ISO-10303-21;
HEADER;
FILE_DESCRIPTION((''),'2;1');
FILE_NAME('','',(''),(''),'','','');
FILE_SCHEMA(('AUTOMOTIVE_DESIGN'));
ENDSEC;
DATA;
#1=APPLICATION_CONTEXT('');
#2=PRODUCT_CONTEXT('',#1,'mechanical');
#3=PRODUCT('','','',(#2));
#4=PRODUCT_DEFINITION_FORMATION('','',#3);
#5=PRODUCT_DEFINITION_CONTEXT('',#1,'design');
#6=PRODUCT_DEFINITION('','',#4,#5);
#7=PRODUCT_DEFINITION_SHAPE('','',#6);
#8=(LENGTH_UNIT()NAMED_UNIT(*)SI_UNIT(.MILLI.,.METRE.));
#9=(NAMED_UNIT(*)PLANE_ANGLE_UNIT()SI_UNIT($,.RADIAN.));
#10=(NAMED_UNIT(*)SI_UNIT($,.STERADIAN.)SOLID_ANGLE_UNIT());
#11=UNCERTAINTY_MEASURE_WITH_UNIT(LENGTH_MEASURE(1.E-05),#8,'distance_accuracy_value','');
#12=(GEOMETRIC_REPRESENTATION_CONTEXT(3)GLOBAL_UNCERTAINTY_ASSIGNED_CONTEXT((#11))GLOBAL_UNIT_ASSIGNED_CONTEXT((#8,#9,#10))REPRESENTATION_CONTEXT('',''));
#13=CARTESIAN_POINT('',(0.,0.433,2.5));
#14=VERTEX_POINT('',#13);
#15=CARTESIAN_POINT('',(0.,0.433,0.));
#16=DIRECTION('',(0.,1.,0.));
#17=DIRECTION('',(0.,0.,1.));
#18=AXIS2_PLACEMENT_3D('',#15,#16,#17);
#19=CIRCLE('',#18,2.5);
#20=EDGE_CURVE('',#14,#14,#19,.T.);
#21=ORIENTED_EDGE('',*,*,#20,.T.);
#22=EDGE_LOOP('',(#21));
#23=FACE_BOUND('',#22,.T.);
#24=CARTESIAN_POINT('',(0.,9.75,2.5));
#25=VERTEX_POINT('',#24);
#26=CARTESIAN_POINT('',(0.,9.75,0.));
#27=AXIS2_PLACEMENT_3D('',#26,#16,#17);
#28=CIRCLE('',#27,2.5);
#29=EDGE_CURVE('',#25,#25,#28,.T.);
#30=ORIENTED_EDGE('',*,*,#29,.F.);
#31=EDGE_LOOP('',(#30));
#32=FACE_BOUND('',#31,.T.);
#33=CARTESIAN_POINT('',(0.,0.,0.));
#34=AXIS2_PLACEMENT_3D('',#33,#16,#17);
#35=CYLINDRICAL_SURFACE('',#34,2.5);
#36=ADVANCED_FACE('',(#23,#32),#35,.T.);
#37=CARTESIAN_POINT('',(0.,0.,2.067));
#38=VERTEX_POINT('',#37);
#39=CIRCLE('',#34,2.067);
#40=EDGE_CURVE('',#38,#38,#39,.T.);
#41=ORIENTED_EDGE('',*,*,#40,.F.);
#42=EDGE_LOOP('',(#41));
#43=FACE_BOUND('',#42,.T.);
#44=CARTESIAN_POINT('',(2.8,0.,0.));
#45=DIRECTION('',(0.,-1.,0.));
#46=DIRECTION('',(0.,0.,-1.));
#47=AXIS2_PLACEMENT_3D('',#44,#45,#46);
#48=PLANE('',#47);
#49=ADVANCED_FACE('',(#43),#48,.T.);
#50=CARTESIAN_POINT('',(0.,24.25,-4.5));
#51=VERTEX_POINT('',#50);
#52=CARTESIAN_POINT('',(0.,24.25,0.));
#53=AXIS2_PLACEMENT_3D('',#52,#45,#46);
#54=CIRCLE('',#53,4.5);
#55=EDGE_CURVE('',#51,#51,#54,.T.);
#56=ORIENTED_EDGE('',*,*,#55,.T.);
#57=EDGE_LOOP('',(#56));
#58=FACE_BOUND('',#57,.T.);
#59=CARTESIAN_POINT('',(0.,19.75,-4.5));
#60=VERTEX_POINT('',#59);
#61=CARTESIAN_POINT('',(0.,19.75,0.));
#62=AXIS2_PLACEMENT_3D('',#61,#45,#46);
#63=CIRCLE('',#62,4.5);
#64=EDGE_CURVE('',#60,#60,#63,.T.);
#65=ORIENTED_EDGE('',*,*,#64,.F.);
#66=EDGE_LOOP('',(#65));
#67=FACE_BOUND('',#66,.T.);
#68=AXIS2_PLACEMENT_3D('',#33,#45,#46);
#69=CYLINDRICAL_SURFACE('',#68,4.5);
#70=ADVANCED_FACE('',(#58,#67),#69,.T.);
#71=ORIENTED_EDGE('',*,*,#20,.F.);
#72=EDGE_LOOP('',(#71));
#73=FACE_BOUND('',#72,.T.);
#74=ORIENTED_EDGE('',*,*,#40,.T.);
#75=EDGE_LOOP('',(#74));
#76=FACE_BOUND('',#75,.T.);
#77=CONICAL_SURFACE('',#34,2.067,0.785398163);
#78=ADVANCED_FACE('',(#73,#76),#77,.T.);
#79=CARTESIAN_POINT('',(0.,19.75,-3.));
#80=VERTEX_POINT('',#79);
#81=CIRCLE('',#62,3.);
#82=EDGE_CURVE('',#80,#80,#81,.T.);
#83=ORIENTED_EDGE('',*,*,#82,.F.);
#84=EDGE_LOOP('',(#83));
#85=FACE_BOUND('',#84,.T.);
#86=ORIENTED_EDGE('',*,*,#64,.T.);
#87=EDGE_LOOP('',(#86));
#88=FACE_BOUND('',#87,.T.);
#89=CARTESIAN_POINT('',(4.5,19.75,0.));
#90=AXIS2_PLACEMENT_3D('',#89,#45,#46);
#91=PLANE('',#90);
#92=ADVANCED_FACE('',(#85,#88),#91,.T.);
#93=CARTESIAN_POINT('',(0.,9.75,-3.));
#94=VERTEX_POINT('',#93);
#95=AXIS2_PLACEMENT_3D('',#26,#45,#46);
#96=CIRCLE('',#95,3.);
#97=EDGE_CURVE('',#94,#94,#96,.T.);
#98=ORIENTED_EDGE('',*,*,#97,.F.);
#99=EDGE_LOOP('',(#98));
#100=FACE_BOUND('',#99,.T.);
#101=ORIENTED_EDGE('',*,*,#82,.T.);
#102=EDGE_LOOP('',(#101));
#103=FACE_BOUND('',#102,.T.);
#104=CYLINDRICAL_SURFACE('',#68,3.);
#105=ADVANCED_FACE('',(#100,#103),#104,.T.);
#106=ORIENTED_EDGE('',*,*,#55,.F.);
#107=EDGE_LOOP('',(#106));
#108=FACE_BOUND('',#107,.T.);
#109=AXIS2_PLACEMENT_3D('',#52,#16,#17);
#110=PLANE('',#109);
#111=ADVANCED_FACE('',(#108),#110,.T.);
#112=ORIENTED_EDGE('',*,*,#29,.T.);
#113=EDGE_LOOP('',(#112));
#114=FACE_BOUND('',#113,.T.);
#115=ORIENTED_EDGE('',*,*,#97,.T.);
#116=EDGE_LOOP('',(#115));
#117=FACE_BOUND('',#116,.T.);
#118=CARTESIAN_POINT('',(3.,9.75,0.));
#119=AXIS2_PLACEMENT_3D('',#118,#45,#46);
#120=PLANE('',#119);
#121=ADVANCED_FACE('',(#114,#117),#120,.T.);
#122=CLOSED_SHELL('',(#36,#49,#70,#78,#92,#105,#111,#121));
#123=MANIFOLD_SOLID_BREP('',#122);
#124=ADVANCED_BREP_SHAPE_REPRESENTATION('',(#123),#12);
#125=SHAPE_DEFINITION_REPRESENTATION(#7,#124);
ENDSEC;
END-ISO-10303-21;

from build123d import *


# Read off the part's stored shape, not the designer's step: M5 机械螺纹 螺柱1
with BuildPart() as part:
    # 草图1 → 旋转1 (revolve)
    with BuildSketch(Plane.XY, mode=Mode.PRIVATE) as revolve_1_sk:
        Polygon((0, 0), (0, 24.25), (4.5, 24.25), (4.5, 19.75), (3, 19.75), (3, 9.75), (2.8, 9.75), (2.8, 0), align=None)
    revolve(revolve_1_sk.sketch.rotate(Axis((0, 0, 0), (0, 1, 0)), 90), axis=Axis((0, 0, 0), (0, 1, 0)))

    # M5 机械螺纹 螺柱1 outline → M5 机械螺纹 螺柱1 (revolve, cut)
    with BuildSketch(Plane.XY):
        Polygon((2.8, 9.75), (2.5, 9.75), (2.5, 0.433), (2.067, 0), (2.8, 0), align=None)
    revolve(axis=Axis((0, 0, 0), (0, 1, 0)), mode=Mode.SUBTRACT)


solid = part.part
